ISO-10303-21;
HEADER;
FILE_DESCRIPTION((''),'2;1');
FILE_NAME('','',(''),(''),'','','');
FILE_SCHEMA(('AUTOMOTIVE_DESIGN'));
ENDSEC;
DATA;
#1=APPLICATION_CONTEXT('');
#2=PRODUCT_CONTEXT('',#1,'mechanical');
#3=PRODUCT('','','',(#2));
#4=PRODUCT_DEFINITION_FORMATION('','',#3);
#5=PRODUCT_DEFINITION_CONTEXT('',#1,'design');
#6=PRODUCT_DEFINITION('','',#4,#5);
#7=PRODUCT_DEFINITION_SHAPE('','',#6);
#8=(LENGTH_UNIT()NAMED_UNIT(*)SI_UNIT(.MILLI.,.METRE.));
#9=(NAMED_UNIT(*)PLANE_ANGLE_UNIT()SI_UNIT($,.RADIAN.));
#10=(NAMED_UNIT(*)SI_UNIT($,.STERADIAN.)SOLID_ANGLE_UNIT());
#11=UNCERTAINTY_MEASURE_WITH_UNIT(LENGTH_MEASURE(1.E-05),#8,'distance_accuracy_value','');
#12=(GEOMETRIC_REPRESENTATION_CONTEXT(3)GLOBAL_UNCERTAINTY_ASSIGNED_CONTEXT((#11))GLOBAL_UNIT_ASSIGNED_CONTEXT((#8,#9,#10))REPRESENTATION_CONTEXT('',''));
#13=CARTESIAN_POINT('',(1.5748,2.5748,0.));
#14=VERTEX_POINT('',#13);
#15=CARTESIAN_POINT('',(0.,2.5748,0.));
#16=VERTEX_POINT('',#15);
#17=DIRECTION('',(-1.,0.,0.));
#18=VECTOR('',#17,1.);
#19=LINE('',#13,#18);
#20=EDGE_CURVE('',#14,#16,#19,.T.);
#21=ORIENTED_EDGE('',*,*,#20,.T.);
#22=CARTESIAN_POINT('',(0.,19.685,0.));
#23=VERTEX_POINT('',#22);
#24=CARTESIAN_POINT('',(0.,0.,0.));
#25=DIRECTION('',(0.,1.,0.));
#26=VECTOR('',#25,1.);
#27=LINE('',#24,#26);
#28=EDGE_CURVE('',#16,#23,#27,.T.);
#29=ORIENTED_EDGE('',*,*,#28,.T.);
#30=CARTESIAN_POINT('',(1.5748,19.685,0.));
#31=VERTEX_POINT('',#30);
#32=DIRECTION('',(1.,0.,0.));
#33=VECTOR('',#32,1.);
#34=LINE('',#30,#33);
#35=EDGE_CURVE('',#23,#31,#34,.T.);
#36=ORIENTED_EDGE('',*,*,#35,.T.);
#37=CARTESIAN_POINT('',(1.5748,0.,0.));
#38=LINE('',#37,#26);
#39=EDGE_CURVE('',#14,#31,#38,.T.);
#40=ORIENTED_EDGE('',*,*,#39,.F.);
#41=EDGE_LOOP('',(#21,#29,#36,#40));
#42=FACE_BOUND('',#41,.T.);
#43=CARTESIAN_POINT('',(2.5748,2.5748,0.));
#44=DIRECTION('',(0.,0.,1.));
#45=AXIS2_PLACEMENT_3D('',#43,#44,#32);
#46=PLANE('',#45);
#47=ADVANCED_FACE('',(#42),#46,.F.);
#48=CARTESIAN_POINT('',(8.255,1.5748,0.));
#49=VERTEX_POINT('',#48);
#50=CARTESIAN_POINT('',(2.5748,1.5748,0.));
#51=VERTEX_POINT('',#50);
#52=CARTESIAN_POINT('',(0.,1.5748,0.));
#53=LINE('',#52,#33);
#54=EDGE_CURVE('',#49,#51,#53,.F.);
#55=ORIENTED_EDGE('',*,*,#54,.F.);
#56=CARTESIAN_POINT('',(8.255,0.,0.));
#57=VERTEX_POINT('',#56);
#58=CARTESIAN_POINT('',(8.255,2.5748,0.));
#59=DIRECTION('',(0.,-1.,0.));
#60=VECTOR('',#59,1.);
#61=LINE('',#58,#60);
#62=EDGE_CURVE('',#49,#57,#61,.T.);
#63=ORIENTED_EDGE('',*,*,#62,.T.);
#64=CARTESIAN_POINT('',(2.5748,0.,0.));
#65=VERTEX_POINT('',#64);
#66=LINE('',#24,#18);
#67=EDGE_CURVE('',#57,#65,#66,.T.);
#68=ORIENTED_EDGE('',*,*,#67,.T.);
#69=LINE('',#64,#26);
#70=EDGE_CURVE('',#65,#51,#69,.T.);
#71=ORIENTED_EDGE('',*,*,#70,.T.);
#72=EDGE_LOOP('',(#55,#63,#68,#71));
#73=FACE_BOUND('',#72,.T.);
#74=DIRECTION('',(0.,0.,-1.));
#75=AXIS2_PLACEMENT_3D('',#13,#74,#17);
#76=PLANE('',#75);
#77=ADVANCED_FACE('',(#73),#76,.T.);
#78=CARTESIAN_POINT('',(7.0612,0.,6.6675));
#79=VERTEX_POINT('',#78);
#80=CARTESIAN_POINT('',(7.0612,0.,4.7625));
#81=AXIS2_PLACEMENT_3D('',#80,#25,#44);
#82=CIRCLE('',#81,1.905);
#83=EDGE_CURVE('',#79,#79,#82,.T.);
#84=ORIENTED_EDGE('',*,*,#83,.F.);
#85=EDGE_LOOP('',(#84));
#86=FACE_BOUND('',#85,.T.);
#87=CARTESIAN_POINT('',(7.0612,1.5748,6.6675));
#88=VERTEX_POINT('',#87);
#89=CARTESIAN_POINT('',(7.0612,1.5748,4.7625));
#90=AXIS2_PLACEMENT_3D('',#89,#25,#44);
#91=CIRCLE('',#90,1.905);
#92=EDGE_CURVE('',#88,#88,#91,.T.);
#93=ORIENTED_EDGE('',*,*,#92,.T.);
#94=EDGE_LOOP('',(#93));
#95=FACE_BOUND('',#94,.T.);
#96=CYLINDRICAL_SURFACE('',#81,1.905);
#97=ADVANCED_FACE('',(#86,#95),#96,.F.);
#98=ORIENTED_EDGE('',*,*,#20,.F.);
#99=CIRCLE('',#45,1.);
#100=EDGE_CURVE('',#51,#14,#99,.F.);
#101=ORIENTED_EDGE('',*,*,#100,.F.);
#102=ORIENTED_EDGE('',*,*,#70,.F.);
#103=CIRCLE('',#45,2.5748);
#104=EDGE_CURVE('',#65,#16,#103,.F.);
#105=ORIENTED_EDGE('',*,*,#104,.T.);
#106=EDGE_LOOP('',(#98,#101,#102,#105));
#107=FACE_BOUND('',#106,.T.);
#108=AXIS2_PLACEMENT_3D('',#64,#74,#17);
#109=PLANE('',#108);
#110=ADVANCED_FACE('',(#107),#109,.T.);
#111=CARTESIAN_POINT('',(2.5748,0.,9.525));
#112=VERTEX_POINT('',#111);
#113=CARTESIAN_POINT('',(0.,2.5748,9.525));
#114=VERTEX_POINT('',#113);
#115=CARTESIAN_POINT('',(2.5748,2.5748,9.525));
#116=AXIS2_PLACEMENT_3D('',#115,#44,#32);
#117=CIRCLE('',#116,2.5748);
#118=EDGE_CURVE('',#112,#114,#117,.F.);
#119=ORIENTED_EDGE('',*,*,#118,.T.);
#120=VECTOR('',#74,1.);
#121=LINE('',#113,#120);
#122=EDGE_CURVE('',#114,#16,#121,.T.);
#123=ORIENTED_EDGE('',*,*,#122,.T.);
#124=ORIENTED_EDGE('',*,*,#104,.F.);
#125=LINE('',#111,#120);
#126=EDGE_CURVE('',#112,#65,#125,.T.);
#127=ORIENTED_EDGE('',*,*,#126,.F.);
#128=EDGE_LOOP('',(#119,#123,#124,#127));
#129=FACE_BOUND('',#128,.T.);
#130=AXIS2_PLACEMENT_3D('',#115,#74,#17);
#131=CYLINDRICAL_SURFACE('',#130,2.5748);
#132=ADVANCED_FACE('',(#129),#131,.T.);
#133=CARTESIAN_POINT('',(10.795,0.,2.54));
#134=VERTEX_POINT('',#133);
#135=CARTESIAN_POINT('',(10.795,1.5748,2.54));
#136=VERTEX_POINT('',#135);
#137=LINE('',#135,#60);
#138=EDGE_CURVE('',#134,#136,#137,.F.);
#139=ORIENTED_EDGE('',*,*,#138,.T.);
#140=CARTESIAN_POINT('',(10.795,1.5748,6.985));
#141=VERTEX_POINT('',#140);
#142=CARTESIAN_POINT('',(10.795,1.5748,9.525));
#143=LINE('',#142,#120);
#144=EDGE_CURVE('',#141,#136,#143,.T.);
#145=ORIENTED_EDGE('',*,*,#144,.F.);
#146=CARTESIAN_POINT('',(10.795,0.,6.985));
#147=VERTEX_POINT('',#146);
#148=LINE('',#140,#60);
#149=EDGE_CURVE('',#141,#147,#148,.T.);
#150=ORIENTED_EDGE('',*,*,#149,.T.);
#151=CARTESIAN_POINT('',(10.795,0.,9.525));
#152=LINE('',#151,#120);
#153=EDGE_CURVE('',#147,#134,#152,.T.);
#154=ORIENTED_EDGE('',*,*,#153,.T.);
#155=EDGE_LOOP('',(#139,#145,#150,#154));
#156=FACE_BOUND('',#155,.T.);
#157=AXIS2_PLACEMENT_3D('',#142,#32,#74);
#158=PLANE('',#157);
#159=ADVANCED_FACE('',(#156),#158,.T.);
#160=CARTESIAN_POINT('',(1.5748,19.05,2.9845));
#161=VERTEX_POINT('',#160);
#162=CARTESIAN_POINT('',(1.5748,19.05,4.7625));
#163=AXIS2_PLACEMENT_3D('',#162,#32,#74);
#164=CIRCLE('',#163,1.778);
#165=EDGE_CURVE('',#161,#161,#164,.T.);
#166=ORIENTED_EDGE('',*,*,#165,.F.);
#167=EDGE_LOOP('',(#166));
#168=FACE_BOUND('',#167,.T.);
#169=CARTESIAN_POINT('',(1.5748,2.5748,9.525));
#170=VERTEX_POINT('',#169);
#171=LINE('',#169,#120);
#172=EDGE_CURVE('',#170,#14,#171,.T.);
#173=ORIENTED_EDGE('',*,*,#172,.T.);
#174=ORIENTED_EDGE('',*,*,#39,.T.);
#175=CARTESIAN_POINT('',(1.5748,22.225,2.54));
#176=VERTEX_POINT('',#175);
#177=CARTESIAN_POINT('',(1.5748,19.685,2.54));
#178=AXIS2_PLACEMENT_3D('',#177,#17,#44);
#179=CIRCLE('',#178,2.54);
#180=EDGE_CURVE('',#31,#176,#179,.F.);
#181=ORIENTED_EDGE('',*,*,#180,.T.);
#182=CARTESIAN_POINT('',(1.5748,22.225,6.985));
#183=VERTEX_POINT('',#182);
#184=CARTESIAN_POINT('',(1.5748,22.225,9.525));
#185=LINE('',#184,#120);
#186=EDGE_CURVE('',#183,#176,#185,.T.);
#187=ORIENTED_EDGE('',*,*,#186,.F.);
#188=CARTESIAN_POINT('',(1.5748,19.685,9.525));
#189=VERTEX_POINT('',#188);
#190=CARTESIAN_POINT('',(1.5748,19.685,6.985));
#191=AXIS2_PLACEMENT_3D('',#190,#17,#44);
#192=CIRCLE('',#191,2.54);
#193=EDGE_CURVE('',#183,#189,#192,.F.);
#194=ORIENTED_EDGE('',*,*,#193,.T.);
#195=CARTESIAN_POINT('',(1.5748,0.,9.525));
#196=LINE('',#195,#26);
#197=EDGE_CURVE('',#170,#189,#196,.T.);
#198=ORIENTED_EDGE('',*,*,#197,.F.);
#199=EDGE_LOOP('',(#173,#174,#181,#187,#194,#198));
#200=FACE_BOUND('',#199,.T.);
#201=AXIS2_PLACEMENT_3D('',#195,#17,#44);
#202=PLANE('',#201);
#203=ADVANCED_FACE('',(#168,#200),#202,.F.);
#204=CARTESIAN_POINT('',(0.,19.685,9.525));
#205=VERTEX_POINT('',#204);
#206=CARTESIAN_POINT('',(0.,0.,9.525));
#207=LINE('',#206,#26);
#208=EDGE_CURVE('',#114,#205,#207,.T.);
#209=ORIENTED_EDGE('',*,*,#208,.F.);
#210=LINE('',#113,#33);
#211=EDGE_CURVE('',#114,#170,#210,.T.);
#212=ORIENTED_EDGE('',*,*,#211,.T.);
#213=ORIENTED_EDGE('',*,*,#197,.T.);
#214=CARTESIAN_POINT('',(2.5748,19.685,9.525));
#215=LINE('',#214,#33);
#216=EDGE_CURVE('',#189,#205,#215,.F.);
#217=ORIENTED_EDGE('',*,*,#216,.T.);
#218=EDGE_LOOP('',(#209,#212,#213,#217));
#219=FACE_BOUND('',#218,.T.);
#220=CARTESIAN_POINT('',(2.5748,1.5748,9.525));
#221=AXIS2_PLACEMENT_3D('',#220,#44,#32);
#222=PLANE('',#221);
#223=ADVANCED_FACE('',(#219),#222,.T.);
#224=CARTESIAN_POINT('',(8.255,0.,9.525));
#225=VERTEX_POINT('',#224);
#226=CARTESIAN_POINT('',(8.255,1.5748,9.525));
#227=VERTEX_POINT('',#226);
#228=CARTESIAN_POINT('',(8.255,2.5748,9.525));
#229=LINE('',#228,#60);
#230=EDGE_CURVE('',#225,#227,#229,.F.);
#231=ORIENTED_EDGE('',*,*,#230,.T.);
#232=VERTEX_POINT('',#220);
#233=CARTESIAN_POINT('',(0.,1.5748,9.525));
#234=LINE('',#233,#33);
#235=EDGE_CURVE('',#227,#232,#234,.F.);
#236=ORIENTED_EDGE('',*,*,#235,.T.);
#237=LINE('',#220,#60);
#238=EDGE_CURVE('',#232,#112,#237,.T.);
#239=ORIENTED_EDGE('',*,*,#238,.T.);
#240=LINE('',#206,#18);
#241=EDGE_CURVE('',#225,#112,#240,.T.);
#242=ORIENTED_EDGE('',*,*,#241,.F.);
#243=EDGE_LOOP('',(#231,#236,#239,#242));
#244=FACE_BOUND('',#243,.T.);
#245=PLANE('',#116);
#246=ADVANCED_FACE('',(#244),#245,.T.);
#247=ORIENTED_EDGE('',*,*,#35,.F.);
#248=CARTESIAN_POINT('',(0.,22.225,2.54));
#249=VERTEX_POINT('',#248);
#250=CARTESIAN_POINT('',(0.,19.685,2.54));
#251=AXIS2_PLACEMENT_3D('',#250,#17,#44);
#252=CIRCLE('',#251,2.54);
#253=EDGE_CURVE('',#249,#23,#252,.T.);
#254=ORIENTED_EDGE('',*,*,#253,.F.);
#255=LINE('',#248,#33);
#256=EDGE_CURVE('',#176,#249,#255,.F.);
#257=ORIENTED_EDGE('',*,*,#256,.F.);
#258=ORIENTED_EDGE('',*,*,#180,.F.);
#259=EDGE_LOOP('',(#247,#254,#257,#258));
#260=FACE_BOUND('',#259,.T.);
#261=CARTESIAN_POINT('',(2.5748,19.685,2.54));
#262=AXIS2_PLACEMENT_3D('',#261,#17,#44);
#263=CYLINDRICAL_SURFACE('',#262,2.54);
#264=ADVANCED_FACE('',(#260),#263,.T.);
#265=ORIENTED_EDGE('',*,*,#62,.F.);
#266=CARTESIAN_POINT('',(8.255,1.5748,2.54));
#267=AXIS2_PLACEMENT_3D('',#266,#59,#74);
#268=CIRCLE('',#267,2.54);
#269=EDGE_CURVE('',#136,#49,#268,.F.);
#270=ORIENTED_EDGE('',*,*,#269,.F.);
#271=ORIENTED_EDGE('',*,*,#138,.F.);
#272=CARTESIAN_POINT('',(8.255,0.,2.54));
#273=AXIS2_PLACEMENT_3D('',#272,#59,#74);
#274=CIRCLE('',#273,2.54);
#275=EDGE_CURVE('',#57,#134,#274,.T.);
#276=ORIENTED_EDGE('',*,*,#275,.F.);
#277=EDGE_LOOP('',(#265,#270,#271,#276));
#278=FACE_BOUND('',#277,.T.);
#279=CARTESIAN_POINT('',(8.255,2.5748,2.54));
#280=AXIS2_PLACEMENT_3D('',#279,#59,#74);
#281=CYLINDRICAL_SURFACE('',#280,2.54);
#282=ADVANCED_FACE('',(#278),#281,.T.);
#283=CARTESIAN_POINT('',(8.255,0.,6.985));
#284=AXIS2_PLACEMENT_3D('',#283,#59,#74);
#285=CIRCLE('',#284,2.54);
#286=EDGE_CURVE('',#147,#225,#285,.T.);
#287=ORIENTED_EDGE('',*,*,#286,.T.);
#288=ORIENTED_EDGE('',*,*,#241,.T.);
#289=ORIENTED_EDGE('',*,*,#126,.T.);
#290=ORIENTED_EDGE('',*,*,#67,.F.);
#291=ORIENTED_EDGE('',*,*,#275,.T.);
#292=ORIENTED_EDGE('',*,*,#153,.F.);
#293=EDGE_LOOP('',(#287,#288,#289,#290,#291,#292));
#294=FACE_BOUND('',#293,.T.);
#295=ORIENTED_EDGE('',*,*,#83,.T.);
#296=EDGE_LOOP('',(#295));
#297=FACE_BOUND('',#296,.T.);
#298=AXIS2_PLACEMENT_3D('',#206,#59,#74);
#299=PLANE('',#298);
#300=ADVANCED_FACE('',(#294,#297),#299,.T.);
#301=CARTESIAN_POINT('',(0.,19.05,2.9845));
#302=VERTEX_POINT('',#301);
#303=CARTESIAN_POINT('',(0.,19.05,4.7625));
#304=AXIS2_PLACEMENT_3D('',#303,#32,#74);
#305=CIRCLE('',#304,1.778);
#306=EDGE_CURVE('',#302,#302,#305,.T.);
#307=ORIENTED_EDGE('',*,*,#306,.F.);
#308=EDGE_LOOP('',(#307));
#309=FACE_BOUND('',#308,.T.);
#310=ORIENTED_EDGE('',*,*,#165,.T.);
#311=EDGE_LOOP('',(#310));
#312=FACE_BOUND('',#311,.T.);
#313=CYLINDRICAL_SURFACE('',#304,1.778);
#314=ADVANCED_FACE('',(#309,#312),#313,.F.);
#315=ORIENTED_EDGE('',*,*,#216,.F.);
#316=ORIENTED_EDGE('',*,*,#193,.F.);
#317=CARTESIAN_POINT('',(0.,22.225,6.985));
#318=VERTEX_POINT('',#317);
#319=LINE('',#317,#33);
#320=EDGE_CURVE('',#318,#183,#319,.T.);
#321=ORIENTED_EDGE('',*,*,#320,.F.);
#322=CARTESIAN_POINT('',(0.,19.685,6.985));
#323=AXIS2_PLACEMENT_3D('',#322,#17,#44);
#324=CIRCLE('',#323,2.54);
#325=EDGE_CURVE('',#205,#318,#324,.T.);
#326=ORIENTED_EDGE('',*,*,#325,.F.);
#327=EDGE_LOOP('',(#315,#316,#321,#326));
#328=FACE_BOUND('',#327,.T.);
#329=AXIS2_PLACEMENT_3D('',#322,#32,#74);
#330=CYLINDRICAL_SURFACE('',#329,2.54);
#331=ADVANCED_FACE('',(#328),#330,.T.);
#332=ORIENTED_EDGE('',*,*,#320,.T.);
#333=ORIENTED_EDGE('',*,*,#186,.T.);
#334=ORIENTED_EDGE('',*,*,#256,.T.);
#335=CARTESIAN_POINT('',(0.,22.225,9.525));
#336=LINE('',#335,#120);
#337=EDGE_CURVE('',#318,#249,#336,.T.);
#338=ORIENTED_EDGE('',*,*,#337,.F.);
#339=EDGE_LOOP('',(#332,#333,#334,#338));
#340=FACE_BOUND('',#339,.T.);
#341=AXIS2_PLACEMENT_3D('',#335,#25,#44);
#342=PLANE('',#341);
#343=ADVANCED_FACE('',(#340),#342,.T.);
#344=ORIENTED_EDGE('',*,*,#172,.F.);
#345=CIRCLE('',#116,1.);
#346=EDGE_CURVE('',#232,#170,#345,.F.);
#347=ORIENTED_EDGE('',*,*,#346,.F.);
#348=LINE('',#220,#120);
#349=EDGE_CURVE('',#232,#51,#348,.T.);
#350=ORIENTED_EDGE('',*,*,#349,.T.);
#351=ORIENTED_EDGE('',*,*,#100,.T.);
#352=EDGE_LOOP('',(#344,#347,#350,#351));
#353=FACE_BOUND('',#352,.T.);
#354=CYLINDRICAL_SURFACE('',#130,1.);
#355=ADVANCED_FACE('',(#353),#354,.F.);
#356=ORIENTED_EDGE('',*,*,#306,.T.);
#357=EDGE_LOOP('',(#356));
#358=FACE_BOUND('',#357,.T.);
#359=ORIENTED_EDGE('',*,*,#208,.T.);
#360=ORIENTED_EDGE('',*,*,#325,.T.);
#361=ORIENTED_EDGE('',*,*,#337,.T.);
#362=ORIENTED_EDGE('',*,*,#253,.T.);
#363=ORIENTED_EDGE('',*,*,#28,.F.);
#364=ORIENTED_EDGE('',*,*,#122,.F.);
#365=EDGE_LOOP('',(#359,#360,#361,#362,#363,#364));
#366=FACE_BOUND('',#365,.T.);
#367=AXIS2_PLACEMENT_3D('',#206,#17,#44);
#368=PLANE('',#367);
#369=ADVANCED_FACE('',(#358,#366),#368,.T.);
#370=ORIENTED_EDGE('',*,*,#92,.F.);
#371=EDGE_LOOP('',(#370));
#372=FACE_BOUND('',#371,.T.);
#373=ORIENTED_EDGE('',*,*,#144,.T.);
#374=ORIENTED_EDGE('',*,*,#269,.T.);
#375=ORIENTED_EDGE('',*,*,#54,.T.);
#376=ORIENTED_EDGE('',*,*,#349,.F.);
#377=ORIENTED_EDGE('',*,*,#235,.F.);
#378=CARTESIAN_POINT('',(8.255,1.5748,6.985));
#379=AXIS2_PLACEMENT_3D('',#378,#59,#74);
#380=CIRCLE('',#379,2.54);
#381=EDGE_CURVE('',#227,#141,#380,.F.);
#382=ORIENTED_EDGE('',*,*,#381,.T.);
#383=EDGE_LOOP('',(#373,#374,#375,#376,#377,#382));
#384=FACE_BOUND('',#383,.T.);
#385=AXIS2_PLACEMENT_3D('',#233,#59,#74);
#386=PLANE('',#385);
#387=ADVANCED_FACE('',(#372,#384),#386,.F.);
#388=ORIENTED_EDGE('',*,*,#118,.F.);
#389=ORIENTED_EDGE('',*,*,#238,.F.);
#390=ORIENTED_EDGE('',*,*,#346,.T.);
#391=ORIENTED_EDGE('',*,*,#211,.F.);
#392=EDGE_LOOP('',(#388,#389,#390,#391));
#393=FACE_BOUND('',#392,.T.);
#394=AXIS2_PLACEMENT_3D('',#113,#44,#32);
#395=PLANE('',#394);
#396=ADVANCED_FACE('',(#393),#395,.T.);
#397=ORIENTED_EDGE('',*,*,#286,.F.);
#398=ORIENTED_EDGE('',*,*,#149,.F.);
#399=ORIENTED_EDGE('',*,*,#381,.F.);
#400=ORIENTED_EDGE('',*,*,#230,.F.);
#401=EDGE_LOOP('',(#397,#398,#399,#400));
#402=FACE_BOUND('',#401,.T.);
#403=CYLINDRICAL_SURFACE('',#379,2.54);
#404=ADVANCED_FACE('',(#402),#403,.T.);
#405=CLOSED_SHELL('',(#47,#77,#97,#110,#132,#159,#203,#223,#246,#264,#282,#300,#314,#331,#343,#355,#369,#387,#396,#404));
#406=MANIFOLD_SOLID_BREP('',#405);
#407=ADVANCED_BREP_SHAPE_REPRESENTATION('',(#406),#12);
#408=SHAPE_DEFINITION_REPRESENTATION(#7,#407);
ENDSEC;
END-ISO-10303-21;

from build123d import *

# Parameters (mm, degrees)
BASE_FLANGE1_DEPTH = 9.525
SKETCH6_R          = 1.905
CUT_EXTRUDE1_DEPTH = 26.173168455
SKETCH7_R          = 1.778
CUT_EXTRUDE2_DEPTH = 26.878337235
FILLET1_R          = 2.54


# Sheet-metal steps are written as plain solids
with BuildPart() as part:
    # Sketch2 → Base-Flange1 (new body)
    with BuildSketch(Plane.XY):
        with BuildLine():
            Line((0, 22.225), (0, 2.5748))
            ThreePointArc((0, 2.5748), (0.75414146, 0.75414146), (2.5748, 0))
            Line((2.5748, 0), (10.795, 0))
            Line((10.795, 0), (10.795, 1.5748))
            Line((10.795, 1.5748), (2.5748, 1.5748))
            ThreePointArc((2.5748, 1.5748), (1.867693219, 1.867693219), (1.5748, 2.5748))
            Line((1.5748, 2.5748), (1.5748, 22.225))
            Line((1.5748, 22.225), (0, 22.225))
        make_face()
    extrude(amount=BASE_FLANGE1_DEPTH)

    # Sketch6 → Cut-Extrude1 (cut, through all)
    with BuildSketch(Plane(origin=(0, 1.5748, 0), x_dir=(1, 0, 0), z_dir=(0, 1, 0))):
        with Locations(Location((7.0612, -4.7625, 0), (0, 0, 270))):
            Circle(SKETCH6_R)
    extrude(amount=-CUT_EXTRUDE1_DEPTH, mode=Mode.SUBTRACT)

    # Sketch7 → Cut-Extrude2 (cut, through all)
    with BuildSketch(Plane(origin=(1.5748, 0, 0), x_dir=(0, 0, -1), z_dir=(1, 0, 0))):
        with Locations((-4.7625, 19.05)):
            Circle(SKETCH7_R)
    extrude(amount=-CUT_EXTRUDE2_DEPTH, mode=Mode.SUBTRACT)

    # Fillet1
    fillet1_edges = [part.edges().sort_by_distance(p)[0] for p in [
        (10.795, 0.7874, 9.525),
        (0.7874, 22.225, 9.525),
        (10.795, 0.7874, 0),
        (0.7874, 22.225, 0),
    ]]
    fillet(fillet1_edges, radius=FILLET1_R)


solid = part.part
